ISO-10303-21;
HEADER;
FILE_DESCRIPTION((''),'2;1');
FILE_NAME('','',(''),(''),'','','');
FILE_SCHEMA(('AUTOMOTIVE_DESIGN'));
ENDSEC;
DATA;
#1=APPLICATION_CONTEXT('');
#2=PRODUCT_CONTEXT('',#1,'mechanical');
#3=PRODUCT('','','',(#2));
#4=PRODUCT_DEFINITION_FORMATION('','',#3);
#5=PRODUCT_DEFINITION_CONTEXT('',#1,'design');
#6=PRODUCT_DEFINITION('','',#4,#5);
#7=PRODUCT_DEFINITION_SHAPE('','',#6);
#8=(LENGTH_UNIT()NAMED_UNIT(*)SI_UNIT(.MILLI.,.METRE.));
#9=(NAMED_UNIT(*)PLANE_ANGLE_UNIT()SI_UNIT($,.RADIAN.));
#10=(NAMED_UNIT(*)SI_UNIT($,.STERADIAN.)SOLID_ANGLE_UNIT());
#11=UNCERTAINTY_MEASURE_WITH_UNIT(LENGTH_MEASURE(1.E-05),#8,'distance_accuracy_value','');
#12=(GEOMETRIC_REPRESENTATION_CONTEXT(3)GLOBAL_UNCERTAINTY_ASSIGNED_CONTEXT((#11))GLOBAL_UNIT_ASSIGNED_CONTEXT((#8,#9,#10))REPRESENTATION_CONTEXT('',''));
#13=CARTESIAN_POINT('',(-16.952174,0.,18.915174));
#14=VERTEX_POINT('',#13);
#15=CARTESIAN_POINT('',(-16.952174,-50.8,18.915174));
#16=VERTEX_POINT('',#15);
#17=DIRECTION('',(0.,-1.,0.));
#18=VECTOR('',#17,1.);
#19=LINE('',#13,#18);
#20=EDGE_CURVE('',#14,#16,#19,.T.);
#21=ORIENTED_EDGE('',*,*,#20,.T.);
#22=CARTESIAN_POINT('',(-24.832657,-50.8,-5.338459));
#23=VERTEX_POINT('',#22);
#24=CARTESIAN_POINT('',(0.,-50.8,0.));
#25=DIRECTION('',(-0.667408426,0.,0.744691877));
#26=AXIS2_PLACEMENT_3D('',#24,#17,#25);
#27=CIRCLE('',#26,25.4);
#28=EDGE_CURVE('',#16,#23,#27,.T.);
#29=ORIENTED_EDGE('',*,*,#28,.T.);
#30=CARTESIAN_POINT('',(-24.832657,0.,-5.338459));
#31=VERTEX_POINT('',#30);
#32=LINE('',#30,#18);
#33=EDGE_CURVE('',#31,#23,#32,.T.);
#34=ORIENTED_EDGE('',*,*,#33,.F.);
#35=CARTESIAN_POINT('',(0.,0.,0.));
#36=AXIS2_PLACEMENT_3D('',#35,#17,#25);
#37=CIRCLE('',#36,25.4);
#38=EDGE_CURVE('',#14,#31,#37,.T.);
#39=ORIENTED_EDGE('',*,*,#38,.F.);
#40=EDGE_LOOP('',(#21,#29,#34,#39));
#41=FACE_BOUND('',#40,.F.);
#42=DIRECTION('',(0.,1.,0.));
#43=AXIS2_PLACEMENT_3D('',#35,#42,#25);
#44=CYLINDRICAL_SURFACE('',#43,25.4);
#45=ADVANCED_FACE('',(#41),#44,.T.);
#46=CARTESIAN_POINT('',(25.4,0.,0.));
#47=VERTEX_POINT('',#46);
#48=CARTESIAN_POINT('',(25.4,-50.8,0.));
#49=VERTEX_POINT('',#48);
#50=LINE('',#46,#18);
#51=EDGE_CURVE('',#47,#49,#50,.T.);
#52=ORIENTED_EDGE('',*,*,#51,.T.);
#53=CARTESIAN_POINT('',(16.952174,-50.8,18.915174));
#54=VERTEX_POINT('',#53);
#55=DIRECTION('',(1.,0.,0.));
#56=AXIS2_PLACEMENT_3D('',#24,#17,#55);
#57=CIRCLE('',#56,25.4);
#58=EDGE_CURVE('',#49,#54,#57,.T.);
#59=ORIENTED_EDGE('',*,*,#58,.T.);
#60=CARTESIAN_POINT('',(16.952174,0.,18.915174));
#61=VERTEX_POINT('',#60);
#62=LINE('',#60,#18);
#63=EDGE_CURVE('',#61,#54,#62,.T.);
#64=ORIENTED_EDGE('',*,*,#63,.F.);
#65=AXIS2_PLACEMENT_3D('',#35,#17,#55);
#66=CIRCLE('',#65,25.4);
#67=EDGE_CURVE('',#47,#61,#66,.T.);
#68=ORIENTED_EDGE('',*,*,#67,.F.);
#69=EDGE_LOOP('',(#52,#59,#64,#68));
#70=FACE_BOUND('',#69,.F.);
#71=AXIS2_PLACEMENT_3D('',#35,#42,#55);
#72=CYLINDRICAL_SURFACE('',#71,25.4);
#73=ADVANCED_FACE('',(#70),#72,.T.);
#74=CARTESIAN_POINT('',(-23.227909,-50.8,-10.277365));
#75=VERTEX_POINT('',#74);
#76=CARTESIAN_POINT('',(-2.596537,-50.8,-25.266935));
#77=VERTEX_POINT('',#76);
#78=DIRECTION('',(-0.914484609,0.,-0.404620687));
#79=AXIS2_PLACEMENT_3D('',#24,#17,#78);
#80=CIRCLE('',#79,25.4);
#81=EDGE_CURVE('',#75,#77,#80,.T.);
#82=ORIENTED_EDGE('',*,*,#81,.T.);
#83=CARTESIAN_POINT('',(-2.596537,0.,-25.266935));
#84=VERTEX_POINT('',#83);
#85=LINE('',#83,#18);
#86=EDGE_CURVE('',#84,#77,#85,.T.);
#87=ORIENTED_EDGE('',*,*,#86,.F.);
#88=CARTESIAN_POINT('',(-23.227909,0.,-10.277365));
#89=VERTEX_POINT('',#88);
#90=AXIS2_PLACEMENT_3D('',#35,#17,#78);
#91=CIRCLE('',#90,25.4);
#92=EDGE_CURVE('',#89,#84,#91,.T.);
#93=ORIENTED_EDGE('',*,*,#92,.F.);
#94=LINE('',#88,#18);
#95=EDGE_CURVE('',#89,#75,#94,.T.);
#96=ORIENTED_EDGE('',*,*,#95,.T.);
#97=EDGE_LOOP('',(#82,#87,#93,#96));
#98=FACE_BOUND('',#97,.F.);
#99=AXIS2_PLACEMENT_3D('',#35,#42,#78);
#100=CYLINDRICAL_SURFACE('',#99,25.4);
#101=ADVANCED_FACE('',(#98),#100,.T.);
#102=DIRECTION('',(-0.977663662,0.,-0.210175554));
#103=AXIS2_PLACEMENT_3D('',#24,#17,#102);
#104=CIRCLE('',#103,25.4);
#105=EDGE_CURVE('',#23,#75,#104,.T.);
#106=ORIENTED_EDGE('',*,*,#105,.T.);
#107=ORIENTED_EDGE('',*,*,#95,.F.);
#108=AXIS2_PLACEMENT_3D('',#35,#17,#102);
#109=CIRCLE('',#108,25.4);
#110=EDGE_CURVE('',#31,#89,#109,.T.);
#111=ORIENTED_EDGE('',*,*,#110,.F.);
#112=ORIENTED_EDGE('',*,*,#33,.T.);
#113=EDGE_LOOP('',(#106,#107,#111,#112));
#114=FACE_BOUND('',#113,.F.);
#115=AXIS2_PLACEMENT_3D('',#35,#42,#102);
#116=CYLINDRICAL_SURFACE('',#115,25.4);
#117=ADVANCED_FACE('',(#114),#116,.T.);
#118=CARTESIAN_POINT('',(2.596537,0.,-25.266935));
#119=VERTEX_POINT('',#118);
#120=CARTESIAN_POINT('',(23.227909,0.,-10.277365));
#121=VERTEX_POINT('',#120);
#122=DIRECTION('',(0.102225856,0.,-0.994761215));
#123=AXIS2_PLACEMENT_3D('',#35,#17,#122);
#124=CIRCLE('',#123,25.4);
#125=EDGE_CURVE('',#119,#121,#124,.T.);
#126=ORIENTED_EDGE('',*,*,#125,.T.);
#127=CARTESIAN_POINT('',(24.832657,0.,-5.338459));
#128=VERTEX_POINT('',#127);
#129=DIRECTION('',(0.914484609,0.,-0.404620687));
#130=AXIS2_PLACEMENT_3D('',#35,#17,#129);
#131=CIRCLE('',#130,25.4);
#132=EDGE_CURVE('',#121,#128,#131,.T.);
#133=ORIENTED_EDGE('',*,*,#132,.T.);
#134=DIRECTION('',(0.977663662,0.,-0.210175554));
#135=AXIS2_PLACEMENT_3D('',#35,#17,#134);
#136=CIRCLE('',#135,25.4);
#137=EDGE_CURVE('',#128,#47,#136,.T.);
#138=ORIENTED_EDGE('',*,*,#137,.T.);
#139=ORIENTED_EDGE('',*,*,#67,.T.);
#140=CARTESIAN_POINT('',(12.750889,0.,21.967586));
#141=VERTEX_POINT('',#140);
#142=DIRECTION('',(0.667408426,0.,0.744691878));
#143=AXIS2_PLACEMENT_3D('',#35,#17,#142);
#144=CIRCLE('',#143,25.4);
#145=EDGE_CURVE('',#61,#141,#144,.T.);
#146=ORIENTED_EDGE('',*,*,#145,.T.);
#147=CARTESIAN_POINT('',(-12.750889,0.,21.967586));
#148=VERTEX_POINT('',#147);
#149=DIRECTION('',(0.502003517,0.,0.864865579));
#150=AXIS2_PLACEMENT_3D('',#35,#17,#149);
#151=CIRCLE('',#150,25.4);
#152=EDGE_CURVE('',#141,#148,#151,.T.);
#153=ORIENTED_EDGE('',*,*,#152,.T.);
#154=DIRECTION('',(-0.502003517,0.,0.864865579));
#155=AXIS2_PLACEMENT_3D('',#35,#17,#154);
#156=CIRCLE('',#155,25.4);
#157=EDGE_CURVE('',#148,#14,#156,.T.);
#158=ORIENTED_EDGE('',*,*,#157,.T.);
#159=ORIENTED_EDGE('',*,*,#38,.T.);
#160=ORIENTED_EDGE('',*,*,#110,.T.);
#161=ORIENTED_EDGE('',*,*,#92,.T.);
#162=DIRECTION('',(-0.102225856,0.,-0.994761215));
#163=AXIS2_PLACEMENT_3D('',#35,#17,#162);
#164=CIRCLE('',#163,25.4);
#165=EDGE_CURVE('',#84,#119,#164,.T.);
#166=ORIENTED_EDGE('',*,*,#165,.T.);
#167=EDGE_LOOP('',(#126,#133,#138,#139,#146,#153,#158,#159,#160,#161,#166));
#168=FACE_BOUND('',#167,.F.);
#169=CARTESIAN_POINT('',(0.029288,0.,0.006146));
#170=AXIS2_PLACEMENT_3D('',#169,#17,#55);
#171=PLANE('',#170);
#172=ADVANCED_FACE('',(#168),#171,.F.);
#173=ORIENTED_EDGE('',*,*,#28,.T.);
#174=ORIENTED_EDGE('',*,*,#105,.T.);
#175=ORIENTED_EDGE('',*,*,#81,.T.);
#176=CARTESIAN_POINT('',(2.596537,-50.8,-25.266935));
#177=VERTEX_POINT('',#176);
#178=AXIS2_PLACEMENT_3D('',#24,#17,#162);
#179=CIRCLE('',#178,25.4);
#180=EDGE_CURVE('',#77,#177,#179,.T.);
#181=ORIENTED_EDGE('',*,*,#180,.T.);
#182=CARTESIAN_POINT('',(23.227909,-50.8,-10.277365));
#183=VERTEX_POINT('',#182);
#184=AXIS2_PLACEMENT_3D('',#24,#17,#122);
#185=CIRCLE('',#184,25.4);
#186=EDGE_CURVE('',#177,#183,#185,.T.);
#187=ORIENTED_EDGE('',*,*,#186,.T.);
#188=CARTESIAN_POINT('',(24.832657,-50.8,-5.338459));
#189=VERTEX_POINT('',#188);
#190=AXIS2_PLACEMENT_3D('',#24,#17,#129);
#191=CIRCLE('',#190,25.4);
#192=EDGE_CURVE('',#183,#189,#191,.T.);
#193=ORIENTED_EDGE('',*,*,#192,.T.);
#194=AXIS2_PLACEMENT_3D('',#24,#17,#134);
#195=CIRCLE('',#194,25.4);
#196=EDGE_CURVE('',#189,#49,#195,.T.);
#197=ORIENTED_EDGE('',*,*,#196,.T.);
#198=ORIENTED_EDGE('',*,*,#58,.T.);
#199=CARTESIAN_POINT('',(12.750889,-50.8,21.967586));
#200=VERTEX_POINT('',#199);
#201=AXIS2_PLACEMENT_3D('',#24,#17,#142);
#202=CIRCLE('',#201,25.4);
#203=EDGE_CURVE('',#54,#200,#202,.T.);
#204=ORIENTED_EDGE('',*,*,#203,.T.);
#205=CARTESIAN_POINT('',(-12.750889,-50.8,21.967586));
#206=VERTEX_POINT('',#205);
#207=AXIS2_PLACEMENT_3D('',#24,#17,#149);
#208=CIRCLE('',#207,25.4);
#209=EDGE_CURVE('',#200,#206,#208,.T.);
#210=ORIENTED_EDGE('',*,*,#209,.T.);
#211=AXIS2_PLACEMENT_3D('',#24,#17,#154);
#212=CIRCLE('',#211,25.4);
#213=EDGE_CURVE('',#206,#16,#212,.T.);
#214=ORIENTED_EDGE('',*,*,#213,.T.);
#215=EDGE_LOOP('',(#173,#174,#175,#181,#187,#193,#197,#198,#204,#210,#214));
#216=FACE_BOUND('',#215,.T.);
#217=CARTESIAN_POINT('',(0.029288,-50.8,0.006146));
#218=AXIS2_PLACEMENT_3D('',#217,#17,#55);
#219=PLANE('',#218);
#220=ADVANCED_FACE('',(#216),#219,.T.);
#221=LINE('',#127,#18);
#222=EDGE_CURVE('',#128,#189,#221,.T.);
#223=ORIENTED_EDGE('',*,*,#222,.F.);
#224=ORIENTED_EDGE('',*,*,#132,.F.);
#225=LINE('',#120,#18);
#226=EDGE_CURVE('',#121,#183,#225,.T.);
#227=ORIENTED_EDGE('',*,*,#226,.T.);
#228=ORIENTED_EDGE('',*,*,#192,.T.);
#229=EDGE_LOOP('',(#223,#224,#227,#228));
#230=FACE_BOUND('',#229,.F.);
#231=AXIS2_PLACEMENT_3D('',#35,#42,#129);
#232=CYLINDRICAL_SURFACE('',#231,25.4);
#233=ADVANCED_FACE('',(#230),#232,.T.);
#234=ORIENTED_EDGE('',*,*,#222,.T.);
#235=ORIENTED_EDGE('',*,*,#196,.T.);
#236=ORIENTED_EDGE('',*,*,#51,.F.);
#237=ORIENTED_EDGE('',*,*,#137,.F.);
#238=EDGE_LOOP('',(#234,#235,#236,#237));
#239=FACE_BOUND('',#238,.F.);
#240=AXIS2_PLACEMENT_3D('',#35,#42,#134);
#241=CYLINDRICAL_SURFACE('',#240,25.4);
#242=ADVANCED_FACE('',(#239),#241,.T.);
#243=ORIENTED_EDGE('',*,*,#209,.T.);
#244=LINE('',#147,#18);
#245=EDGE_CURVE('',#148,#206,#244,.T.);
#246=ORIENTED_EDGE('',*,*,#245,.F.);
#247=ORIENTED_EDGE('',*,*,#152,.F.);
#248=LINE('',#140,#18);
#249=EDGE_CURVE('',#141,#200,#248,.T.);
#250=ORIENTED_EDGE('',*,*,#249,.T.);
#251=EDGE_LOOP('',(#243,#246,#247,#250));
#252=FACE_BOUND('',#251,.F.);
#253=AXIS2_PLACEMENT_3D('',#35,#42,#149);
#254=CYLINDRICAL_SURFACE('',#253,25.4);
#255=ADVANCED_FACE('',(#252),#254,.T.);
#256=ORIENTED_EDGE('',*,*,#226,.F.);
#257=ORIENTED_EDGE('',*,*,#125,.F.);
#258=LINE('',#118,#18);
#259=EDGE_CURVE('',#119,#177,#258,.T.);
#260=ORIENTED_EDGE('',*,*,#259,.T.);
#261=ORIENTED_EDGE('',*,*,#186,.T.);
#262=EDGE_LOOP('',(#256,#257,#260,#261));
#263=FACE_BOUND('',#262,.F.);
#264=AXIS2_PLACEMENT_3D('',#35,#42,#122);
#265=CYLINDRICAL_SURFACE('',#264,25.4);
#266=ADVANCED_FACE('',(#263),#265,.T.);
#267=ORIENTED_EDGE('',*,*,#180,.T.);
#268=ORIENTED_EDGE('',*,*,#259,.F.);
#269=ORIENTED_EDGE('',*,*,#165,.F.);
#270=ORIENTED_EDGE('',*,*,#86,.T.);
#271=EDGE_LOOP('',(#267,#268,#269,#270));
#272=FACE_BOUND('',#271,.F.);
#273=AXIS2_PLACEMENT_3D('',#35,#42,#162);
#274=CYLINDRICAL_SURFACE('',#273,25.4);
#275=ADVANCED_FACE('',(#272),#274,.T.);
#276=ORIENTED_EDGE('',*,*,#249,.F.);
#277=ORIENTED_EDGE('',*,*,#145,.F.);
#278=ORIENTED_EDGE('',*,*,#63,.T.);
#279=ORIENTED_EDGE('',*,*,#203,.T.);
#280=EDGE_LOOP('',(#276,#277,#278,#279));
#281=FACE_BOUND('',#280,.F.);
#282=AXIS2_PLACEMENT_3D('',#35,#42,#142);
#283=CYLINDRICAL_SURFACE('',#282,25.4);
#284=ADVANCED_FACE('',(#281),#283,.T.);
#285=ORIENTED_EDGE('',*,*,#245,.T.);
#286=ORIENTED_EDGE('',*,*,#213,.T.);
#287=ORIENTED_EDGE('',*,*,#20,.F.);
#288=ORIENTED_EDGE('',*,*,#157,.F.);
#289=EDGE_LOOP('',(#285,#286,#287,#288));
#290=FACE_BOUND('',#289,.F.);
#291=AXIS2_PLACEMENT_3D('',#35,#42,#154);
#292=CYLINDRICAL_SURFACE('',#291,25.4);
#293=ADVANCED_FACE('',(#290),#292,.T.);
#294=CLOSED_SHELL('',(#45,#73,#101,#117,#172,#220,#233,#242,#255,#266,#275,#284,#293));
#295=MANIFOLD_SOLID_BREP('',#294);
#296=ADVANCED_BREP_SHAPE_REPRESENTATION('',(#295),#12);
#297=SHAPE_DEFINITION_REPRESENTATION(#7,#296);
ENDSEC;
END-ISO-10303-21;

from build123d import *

# Parameters (mm, degrees)
F1_DEPTH = 50.8


with BuildPart() as f1:
    # F0 (on Front) → F1 (new body)
    with BuildSketch(Plane.XZ):
        with BuildLine():
            ThreePointArc((24.8326570204, -5.338459076), (25.2577660168, -2.6842607624), (25.4, 0))
            ThreePointArc((25.4, 0), (23.1920807644, 10.3579626287), (16.9521740302, 18.9151736881))
            ThreePointArc((16.9521740302, 18.9151736881), (14.9297454082, 20.5490316571), (12.750889326, 21.9675856979))
            ThreePointArc((12.750889326, 21.9675856979), (0, 25.4), (-12.750889326, 21.9675856979))
            ThreePointArc((-12.750889326, 21.9675856979), (-14.9297454082, 20.5490316571), (-16.9521740302, 18.9151736881))
            ThreePointArc((-16.9521740302, 18.9151736881), (-24.1568355139, 7.8490316571), (-24.8326570204, -5.338459076))
            ThreePointArc((-24.8326570204, -5.338459076), (-24.1568355139, -7.8490316571), (-23.2279090598, -10.2773654556))
            ThreePointArc((-23.2279090598, -10.2773654556), (-14.9297454082, -20.5490316571), (-2.5965367436, -25.2669348545))
            ThreePointArc((-2.5965367436, -25.2669348545), (0, -25.4), (2.5965367436, -25.2669348545))
            ThreePointArc((2.5965367436, -25.2669348545), (14.9297454082, -20.5490316571), (23.2279090598, -10.2773654556))
            ThreePointArc((23.2279090598, -10.2773654556), (24.1568355139, -7.8490316571), (24.8326570204, -5.338459076))
        make_face()
    extrude(amount=F1_DEPTH)


solid = f1.part
